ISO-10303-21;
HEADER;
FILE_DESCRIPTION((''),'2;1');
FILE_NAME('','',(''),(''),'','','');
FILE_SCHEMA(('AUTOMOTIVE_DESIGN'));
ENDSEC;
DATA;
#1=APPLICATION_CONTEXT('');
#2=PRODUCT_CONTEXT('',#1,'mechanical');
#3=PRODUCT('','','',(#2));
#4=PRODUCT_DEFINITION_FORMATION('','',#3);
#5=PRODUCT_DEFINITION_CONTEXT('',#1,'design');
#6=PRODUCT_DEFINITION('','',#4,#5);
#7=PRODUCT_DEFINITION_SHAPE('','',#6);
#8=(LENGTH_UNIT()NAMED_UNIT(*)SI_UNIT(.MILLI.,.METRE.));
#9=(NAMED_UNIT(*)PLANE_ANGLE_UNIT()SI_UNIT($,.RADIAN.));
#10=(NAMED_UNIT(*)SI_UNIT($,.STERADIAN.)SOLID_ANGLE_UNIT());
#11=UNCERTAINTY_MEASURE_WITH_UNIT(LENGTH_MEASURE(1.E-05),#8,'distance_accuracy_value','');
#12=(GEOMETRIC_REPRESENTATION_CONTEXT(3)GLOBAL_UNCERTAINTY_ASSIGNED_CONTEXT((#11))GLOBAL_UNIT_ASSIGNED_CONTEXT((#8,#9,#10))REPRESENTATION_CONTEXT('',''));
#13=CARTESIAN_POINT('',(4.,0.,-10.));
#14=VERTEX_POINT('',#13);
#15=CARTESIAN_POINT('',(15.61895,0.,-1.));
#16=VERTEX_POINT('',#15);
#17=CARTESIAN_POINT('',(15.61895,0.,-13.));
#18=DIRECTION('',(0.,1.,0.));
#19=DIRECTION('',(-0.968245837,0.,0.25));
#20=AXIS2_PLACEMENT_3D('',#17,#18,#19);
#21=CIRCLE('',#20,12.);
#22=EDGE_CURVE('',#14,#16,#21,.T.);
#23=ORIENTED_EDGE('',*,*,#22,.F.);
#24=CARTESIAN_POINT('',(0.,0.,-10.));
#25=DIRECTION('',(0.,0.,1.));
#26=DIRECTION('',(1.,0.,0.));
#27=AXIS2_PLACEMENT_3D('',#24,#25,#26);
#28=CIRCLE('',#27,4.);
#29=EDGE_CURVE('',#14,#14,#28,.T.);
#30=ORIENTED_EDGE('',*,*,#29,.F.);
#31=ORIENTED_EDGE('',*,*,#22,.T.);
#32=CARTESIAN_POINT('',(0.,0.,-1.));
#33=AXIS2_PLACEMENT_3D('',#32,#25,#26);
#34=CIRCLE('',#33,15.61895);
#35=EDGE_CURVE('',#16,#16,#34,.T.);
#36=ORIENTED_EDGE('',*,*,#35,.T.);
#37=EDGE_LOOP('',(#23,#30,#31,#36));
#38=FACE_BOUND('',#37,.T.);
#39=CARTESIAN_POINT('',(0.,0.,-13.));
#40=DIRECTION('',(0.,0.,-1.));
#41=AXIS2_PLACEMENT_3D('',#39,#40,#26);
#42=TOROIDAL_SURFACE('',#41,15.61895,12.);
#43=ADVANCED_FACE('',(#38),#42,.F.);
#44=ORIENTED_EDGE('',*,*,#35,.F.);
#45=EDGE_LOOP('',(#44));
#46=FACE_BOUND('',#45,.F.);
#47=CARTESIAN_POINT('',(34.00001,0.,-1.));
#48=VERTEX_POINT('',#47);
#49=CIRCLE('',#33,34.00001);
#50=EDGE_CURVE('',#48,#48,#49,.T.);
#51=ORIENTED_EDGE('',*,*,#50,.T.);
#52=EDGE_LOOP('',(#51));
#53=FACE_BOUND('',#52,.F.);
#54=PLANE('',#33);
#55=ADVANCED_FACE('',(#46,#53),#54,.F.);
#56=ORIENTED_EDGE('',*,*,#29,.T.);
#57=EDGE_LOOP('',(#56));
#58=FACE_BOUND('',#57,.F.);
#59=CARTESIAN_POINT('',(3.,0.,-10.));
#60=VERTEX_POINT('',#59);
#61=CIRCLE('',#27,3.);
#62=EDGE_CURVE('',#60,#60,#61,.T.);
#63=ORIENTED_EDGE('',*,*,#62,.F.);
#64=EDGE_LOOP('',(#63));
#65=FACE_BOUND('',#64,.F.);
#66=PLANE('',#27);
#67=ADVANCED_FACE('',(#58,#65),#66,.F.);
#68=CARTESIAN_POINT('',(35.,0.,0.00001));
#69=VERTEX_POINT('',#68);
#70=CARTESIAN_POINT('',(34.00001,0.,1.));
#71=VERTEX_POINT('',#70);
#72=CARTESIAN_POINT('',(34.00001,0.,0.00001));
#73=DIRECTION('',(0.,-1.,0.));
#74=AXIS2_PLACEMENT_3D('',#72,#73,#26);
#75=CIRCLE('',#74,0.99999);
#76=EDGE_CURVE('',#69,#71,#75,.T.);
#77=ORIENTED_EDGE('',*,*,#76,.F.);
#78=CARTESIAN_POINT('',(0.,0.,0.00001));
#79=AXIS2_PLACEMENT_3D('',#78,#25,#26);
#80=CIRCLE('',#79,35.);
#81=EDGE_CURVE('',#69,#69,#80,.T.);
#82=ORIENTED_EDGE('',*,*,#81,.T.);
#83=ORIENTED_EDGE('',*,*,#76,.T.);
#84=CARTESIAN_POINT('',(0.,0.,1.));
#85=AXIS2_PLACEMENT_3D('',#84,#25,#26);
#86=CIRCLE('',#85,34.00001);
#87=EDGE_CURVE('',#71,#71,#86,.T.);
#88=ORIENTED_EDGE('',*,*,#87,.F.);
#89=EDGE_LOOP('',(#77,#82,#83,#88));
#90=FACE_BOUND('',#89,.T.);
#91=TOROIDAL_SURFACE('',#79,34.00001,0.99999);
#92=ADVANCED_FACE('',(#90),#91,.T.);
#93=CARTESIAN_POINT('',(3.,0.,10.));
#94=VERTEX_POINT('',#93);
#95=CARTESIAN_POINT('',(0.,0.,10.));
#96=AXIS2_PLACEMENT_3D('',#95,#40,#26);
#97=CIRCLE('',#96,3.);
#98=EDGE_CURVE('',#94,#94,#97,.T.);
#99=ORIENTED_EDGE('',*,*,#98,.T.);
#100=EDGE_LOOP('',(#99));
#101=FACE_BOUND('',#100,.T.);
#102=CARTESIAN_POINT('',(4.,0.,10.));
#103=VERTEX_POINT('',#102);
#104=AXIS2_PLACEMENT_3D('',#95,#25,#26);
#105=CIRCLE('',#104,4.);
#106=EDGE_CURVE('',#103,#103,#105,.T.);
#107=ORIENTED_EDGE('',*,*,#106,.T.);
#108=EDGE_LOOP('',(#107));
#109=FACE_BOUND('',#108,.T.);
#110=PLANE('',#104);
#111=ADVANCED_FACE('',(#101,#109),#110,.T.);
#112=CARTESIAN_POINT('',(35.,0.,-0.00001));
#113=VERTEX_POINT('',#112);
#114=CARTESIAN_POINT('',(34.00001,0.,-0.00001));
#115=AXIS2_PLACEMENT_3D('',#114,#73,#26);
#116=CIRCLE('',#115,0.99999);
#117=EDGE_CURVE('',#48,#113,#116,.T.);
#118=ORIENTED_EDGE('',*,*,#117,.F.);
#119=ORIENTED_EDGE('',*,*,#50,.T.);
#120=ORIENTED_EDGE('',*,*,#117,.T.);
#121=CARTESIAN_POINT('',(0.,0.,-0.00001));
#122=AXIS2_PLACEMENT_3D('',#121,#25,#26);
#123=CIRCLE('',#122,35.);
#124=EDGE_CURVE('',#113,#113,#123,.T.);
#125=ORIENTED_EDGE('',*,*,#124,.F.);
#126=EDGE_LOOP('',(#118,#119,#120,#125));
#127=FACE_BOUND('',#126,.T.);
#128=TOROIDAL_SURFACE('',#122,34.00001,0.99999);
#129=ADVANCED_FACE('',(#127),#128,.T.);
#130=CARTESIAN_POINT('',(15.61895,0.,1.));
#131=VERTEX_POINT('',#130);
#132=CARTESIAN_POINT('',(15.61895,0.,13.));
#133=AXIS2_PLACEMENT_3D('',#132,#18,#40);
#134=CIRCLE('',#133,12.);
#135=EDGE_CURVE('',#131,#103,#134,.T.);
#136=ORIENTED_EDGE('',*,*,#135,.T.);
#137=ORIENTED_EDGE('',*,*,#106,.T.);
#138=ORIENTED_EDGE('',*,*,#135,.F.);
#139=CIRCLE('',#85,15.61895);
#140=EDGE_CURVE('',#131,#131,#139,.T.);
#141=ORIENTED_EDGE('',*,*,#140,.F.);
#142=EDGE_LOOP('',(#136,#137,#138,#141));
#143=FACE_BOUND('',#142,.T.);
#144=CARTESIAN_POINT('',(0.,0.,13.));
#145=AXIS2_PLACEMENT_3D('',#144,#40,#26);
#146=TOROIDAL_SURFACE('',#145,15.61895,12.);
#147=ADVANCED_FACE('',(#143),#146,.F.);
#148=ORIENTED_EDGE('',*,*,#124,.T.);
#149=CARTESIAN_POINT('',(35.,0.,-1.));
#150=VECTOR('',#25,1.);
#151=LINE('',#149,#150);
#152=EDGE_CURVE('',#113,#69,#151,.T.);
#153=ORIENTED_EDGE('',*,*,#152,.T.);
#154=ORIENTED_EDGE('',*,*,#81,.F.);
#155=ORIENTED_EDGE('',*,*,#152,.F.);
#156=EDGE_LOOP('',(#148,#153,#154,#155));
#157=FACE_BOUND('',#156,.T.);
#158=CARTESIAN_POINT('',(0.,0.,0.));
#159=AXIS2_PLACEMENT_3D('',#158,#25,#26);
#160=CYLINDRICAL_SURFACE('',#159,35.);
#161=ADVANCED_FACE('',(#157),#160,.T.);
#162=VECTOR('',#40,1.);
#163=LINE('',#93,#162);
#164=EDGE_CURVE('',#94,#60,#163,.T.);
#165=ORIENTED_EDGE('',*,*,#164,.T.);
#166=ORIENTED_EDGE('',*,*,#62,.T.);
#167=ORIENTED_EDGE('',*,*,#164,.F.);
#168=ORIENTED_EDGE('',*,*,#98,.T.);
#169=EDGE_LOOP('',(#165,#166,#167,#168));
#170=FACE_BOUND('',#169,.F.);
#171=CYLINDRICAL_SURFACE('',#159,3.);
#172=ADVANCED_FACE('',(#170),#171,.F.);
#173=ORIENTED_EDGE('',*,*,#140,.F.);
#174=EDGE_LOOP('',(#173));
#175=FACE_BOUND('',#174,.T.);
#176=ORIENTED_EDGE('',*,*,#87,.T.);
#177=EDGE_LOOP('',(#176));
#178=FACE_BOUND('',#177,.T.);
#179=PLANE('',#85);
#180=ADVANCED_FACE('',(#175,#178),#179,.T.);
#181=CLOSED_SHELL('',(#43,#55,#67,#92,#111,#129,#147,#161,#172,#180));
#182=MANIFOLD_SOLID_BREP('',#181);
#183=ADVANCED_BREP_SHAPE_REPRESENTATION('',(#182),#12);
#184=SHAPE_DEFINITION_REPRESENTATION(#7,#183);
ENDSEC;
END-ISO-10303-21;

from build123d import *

# Parameters (mm, degrees)
F0_R      = 4
F1_DEPTH  = 10
F2_R      = 35
F3_DEPTH  = 1
F6_R      = 0.99999
F7_R      = 3
F8_DEPTH  = 10.001
F9_R      = 3
F10_DEPTH = 10.001


# Not quite as in the source:
# - a fillet or chamfer that OpenCascade refuses, or shapes differently, is made with other operations: its cross-section is extruded or revolved along the edge and cut away or added
# - a fillet or chamfer is up to 0.001 mm smaller than in the source, because OpenCascade refuses the exact size


with BuildPart() as f1:
    # F0 (on Top) → F1 (new body, symmetric)
    with BuildSketch(Plane.XY):
        Circle(F0_R)
    extrude(amount=F1_DEPTH, both=True)

    # F2 (on Top) → F3 (join, symmetric)
    with BuildSketch(Plane.XY):
        Circle(F2_R)
    extrude(amount=F3_DEPTH, both=True)

    # F4: fillet of radius 12 on 1 edges, made by hand

    # F4_s1 → F4_t2 (revolve)
    with BuildSketch(Plane.XZ):
        with BuildLine():
            ThreePointArc((15.6189500386, 1), (8.2704808103, 3.5131670195), (4, 10))
            Line((4, 10), (4, 1))
            Line((4, 1), (15.6189500386, 1))
        make_face()
    revolve(axis=Axis((0, 0, 1), (0, 0, 1)))

    # F5: fillet of radius 12 on 1 edges, made by hand

    # F5_s1 → F5_t2 (revolve)
    with BuildSketch(Plane.XZ):
        with BuildLine():
            ThreePointArc((4, -10), (8.2704808103, -3.5131670195), (15.6189500386, -1))
            Line((15.6189500386, -1), (4, -1))
            Line((4, -1), (4, -10))
        make_face()
    revolve(axis=Axis((0, 0, -1), (0, 0, 1)))

    # F6 (radius 1 in the source; OpenCascade refuses exactly that, so slightly less here)
    f6_edges = [f1.edges().sort_by_distance(p)[0] for p in [
        (-35, 0, 1),
        (-35, 0, -1),
    ]]
    fillet(f6_edges, radius=F6_R)

    # F7 (on Top) → F8 (cut, through all)
    with BuildSketch(Plane.XY):
        Circle(F7_R)
    extrude(amount=-F8_DEPTH, mode=Mode.SUBTRACT)

    # F9 (on Top) → F10 (cut, through all)
    with BuildSketch(Plane.XY):
        Circle(F9_R)
    extrude(amount=F10_DEPTH, mode=Mode.SUBTRACT)


solid = f1.part
